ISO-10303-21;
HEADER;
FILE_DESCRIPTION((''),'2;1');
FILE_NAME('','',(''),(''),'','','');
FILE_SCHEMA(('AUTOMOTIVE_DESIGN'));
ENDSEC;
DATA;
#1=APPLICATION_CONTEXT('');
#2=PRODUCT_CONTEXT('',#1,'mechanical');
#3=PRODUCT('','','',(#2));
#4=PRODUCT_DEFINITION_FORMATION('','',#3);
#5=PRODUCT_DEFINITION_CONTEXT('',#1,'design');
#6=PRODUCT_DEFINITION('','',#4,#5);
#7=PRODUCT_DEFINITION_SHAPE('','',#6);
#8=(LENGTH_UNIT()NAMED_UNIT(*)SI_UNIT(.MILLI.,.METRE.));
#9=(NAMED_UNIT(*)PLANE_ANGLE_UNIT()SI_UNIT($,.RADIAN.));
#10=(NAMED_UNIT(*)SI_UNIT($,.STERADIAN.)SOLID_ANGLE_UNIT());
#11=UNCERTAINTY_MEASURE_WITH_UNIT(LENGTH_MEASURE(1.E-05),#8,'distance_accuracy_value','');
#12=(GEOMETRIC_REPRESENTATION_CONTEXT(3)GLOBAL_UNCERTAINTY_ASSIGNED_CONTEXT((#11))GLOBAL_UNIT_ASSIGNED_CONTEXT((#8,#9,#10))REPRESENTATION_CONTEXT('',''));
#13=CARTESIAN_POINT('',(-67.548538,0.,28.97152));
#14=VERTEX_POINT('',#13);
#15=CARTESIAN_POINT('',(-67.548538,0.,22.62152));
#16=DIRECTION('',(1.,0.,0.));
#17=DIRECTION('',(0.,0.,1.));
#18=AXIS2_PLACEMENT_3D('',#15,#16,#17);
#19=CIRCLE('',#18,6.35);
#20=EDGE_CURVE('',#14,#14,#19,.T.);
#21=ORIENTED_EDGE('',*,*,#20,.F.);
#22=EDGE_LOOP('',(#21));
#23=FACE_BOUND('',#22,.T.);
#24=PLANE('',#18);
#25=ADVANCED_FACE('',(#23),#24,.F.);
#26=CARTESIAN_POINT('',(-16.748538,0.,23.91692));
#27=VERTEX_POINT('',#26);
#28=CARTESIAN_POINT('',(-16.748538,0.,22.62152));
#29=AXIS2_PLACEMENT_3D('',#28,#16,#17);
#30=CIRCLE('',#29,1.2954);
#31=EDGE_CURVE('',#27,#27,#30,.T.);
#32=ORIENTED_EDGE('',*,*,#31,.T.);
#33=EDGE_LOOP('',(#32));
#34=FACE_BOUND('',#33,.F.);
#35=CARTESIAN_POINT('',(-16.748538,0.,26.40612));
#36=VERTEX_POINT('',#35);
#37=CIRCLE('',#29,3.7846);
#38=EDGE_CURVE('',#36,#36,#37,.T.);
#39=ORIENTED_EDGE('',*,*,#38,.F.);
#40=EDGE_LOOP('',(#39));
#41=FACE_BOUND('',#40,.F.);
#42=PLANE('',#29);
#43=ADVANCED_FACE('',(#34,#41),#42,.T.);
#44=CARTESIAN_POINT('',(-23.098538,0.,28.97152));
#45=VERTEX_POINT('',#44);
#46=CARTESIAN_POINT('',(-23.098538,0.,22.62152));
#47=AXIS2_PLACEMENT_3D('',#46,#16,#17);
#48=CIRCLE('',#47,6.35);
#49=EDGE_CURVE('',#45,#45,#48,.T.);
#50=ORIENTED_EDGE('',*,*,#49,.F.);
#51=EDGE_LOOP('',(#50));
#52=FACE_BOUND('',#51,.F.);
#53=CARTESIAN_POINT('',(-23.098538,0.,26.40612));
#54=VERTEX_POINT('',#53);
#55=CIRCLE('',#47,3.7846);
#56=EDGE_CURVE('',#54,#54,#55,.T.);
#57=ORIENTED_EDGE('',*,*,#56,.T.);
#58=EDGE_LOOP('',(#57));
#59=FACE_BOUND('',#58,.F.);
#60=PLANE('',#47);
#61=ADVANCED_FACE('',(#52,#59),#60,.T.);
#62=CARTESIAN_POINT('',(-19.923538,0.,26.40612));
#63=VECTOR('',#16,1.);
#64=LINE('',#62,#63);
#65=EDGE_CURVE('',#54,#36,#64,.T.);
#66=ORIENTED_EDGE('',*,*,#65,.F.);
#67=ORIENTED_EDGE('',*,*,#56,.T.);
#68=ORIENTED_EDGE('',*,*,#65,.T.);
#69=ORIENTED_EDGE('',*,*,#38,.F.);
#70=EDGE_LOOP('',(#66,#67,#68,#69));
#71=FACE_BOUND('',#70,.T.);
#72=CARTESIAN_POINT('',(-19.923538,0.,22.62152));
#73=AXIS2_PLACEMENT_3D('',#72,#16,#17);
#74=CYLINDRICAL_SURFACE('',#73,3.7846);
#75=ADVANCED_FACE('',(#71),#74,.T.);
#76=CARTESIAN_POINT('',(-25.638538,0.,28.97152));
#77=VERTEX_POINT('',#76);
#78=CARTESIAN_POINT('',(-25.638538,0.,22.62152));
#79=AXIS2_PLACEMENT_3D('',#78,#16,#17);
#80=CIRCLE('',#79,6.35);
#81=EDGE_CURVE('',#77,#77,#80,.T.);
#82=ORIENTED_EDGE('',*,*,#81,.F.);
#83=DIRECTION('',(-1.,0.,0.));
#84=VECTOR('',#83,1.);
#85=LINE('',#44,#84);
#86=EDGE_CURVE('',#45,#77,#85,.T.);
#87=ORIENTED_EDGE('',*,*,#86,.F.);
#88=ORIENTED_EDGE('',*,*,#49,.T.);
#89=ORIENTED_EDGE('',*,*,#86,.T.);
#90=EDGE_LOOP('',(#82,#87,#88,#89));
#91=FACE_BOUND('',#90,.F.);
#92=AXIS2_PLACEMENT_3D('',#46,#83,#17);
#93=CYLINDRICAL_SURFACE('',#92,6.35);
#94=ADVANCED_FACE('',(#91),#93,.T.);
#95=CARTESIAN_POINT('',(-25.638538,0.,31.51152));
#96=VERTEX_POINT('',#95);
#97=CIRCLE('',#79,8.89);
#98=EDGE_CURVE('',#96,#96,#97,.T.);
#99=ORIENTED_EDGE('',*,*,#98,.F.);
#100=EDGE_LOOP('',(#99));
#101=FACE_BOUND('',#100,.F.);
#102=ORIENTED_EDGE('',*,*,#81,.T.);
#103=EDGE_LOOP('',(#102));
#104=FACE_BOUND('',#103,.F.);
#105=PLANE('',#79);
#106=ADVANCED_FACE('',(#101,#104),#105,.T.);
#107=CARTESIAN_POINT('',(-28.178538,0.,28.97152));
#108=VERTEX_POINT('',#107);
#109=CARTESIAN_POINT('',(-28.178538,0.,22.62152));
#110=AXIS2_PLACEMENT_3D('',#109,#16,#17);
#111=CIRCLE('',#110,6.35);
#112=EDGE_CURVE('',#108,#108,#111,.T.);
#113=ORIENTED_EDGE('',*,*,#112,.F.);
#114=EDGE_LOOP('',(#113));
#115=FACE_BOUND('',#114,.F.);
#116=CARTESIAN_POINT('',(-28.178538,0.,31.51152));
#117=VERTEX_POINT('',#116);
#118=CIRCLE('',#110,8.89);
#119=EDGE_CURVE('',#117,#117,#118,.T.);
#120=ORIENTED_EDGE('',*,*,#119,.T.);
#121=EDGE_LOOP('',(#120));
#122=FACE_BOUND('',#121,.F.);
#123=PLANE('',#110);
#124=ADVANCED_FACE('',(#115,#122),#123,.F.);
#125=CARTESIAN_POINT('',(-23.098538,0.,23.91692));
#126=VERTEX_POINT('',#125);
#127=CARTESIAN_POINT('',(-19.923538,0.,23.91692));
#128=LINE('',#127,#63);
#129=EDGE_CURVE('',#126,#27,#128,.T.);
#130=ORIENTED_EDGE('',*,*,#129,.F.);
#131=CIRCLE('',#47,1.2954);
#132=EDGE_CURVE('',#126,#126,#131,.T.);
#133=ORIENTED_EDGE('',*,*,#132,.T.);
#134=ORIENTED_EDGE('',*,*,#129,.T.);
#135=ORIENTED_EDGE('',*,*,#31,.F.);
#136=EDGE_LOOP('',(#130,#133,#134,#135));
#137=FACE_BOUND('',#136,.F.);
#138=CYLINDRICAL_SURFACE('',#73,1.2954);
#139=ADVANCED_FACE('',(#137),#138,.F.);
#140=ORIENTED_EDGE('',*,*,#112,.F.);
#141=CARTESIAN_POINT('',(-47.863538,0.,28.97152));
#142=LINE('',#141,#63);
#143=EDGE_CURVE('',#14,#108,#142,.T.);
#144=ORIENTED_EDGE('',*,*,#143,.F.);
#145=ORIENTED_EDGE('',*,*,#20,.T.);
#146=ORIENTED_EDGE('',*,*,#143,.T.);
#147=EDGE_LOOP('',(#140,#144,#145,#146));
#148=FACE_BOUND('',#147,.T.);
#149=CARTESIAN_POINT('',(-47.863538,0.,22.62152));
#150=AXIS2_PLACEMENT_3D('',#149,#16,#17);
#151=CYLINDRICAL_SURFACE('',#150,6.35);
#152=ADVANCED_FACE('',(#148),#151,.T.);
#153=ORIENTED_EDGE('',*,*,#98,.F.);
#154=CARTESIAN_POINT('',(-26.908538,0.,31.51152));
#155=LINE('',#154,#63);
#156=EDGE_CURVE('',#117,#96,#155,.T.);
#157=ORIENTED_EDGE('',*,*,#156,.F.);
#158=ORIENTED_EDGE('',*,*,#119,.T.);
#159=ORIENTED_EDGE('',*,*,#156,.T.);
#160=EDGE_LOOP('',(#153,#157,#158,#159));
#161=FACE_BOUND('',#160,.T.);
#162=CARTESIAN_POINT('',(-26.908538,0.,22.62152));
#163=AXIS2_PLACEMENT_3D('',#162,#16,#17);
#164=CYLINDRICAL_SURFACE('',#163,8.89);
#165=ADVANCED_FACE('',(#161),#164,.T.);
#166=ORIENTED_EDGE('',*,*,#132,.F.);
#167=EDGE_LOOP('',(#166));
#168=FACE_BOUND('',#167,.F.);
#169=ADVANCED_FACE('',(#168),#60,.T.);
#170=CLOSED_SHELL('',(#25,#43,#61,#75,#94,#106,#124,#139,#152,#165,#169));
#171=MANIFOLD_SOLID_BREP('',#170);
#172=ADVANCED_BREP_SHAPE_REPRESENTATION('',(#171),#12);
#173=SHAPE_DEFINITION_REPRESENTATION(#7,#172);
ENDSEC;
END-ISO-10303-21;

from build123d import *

# Parameters (mm, degrees)
F0_W   = 2.54
F0_H   = 6.35
F0_H_2 = 2.54
F0_W_2 = 39.37
F0_W_3 = 6.35
F0_H_3 = 2.4892


# Not quite as in the source:
# - a feature names something its author has since deleted; it is built from what else it names


with BuildPart() as f1:
    # F0 (on Front) → F1 (revolve)
    with BuildSketch(Plane.XZ):
        Polygon((-23.0985377062, 28.9715196595), (-25.6385377062, 28.9715196595), (-25.6385377062, 22.6215196595), (-23.0985377062, 22.6215196595), (-23.0985377062, 23.9169196595), (-23.0985377062, 26.4061196595), align=None)
        with Locations((-26.9085377062, 25.7965196595)):
            Rectangle(F0_W, F0_H)
        with Locations((-26.9085377062, 30.2415196595)):
            Rectangle(F0_W, F0_H_2)
        with Locations((-47.8635377062, 25.7965196595)):
            Rectangle(F0_W_2, F0_H)
        with Locations((-19.9235377062, 25.1615196595)):
            Rectangle(F0_W_3, F0_H_3)
    revolve(axis=Axis((-42.1485377062, 0, 22.6215196595), (1, 0, 0)))


solid = f1.part
